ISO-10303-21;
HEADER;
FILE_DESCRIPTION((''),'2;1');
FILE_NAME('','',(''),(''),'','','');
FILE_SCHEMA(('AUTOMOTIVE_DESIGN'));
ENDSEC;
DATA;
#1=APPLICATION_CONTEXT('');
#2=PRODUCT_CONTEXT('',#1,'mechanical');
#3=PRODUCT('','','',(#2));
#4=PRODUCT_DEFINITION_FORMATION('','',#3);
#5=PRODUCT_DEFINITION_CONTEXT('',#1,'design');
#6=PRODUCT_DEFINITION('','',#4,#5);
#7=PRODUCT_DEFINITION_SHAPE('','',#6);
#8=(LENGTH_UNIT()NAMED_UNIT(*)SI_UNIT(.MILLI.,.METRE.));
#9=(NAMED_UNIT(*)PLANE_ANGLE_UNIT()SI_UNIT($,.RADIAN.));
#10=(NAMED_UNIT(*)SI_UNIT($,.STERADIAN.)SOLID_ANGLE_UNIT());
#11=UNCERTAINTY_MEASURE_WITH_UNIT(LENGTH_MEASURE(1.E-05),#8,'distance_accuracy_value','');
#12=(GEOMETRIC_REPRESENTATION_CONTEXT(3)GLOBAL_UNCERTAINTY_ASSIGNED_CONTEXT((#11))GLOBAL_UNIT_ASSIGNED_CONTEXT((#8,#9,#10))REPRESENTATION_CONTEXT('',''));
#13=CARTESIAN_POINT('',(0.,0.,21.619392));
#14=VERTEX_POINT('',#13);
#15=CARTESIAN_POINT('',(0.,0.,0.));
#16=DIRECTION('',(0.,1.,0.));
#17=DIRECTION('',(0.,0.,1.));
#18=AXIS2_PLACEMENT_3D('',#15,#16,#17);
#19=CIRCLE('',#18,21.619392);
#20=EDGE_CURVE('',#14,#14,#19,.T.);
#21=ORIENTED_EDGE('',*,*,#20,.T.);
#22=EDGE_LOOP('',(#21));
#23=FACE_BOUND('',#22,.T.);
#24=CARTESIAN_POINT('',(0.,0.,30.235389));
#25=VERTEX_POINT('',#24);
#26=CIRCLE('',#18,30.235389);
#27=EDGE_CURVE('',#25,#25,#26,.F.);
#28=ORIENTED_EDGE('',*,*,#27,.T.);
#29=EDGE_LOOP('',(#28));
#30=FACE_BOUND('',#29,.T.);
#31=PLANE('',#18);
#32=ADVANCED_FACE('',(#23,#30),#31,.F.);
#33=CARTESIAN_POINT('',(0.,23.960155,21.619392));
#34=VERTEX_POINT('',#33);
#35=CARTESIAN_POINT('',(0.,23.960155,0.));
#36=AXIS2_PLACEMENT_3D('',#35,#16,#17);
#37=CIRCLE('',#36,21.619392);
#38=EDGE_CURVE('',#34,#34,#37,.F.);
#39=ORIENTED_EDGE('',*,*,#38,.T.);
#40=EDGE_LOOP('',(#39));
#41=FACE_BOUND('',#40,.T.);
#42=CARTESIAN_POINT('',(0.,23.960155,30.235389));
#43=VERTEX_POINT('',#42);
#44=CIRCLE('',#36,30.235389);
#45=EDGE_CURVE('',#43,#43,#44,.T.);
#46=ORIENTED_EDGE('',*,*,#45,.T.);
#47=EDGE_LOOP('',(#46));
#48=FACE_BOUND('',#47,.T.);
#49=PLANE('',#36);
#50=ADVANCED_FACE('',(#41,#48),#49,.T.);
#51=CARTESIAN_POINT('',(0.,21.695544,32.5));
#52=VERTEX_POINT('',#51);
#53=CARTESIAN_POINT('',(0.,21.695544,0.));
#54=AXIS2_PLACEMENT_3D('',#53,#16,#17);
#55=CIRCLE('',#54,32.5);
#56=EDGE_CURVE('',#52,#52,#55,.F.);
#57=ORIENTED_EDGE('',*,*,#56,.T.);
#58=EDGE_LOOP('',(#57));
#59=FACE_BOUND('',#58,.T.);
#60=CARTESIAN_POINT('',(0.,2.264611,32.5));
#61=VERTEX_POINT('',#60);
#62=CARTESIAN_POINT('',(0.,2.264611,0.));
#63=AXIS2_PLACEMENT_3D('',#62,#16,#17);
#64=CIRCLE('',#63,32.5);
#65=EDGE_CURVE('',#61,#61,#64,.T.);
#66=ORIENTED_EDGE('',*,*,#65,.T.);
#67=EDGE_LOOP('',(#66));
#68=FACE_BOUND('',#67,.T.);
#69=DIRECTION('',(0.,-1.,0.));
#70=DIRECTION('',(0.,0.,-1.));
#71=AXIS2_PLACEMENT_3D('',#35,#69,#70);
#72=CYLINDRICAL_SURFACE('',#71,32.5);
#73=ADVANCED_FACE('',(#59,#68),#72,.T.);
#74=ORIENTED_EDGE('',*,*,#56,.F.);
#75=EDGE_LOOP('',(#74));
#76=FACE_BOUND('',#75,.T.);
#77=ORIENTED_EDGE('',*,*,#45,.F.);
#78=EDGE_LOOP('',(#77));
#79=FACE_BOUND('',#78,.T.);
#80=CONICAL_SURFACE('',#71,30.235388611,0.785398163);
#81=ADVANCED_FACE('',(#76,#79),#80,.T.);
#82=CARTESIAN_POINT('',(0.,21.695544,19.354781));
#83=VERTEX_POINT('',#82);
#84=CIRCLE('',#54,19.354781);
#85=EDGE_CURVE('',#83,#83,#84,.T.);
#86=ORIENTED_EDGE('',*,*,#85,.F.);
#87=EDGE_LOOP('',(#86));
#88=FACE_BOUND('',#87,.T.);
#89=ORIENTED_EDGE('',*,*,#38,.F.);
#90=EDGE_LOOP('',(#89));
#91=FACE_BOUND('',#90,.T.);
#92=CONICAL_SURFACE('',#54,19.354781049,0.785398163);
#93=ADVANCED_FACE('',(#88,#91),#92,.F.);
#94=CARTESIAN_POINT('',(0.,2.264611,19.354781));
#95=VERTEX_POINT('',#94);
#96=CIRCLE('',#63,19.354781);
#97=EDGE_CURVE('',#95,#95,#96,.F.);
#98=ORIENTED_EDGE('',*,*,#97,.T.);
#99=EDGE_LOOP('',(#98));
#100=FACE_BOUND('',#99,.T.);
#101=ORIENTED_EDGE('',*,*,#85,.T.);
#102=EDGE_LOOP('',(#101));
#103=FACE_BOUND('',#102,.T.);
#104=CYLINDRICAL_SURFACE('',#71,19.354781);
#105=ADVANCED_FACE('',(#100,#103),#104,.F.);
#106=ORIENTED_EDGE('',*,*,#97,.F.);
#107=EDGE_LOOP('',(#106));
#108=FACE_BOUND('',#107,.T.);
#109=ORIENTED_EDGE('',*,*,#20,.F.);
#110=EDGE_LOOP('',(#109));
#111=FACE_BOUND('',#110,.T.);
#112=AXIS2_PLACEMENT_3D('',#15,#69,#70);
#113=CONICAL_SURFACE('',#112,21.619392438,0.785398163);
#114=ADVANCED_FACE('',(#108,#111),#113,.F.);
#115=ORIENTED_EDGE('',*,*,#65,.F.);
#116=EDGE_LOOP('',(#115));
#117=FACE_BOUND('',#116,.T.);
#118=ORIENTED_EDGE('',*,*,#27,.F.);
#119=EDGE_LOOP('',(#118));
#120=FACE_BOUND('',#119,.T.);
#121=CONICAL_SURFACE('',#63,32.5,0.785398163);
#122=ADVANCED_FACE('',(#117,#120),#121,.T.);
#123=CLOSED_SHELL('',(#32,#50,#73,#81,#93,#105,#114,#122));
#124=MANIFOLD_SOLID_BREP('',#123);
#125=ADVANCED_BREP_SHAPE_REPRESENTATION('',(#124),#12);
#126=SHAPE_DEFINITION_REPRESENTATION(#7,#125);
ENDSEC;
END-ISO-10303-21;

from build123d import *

# Parameters (mm, degrees)
SKETCH1_R           = 32.5
BOSS_EXTRUDE1_DEPTH = 23.960155203
SKETCH2_R           = 19.354781049
CUT_EXTRUDE1_DEPTH  = 52.832316534
CHAMFER1_SIZE       = 2.264611389


with BuildPart() as part:
    # Sketch1 → Boss-Extrude1 (new body)
    with BuildSketch(Plane(origin=(0, 0, 0), x_dir=(1, 0, 0), z_dir=(0, 1, 0))):
        Circle(SKETCH1_R)
    extrude(amount=BOSS_EXTRUDE1_DEPTH)

    # Sketch2 → Cut-Extrude1 (cut, through all)
    with BuildSketch(Plane(origin=(0, 0, 0), x_dir=(1, 0, 0), z_dir=(0, 1, 0))):
        Circle(SKETCH2_R)
    extrude(amount=CUT_EXTRUDE1_DEPTH, mode=Mode.SUBTRACT)

    # Chamfer1
    chamfer1_edges = [part.edges().sort_by_distance(p)[0] for p in [
        (-19.354781049, 23.960155203, 0),
        (-19.354781049, 0, 0),
        (-32.5, 0, 0),
        (-32.5, 23.960155203, 0),
    ]]
    chamfer(chamfer1_edges, length=CHAMFER1_SIZE)


solid = part.part
